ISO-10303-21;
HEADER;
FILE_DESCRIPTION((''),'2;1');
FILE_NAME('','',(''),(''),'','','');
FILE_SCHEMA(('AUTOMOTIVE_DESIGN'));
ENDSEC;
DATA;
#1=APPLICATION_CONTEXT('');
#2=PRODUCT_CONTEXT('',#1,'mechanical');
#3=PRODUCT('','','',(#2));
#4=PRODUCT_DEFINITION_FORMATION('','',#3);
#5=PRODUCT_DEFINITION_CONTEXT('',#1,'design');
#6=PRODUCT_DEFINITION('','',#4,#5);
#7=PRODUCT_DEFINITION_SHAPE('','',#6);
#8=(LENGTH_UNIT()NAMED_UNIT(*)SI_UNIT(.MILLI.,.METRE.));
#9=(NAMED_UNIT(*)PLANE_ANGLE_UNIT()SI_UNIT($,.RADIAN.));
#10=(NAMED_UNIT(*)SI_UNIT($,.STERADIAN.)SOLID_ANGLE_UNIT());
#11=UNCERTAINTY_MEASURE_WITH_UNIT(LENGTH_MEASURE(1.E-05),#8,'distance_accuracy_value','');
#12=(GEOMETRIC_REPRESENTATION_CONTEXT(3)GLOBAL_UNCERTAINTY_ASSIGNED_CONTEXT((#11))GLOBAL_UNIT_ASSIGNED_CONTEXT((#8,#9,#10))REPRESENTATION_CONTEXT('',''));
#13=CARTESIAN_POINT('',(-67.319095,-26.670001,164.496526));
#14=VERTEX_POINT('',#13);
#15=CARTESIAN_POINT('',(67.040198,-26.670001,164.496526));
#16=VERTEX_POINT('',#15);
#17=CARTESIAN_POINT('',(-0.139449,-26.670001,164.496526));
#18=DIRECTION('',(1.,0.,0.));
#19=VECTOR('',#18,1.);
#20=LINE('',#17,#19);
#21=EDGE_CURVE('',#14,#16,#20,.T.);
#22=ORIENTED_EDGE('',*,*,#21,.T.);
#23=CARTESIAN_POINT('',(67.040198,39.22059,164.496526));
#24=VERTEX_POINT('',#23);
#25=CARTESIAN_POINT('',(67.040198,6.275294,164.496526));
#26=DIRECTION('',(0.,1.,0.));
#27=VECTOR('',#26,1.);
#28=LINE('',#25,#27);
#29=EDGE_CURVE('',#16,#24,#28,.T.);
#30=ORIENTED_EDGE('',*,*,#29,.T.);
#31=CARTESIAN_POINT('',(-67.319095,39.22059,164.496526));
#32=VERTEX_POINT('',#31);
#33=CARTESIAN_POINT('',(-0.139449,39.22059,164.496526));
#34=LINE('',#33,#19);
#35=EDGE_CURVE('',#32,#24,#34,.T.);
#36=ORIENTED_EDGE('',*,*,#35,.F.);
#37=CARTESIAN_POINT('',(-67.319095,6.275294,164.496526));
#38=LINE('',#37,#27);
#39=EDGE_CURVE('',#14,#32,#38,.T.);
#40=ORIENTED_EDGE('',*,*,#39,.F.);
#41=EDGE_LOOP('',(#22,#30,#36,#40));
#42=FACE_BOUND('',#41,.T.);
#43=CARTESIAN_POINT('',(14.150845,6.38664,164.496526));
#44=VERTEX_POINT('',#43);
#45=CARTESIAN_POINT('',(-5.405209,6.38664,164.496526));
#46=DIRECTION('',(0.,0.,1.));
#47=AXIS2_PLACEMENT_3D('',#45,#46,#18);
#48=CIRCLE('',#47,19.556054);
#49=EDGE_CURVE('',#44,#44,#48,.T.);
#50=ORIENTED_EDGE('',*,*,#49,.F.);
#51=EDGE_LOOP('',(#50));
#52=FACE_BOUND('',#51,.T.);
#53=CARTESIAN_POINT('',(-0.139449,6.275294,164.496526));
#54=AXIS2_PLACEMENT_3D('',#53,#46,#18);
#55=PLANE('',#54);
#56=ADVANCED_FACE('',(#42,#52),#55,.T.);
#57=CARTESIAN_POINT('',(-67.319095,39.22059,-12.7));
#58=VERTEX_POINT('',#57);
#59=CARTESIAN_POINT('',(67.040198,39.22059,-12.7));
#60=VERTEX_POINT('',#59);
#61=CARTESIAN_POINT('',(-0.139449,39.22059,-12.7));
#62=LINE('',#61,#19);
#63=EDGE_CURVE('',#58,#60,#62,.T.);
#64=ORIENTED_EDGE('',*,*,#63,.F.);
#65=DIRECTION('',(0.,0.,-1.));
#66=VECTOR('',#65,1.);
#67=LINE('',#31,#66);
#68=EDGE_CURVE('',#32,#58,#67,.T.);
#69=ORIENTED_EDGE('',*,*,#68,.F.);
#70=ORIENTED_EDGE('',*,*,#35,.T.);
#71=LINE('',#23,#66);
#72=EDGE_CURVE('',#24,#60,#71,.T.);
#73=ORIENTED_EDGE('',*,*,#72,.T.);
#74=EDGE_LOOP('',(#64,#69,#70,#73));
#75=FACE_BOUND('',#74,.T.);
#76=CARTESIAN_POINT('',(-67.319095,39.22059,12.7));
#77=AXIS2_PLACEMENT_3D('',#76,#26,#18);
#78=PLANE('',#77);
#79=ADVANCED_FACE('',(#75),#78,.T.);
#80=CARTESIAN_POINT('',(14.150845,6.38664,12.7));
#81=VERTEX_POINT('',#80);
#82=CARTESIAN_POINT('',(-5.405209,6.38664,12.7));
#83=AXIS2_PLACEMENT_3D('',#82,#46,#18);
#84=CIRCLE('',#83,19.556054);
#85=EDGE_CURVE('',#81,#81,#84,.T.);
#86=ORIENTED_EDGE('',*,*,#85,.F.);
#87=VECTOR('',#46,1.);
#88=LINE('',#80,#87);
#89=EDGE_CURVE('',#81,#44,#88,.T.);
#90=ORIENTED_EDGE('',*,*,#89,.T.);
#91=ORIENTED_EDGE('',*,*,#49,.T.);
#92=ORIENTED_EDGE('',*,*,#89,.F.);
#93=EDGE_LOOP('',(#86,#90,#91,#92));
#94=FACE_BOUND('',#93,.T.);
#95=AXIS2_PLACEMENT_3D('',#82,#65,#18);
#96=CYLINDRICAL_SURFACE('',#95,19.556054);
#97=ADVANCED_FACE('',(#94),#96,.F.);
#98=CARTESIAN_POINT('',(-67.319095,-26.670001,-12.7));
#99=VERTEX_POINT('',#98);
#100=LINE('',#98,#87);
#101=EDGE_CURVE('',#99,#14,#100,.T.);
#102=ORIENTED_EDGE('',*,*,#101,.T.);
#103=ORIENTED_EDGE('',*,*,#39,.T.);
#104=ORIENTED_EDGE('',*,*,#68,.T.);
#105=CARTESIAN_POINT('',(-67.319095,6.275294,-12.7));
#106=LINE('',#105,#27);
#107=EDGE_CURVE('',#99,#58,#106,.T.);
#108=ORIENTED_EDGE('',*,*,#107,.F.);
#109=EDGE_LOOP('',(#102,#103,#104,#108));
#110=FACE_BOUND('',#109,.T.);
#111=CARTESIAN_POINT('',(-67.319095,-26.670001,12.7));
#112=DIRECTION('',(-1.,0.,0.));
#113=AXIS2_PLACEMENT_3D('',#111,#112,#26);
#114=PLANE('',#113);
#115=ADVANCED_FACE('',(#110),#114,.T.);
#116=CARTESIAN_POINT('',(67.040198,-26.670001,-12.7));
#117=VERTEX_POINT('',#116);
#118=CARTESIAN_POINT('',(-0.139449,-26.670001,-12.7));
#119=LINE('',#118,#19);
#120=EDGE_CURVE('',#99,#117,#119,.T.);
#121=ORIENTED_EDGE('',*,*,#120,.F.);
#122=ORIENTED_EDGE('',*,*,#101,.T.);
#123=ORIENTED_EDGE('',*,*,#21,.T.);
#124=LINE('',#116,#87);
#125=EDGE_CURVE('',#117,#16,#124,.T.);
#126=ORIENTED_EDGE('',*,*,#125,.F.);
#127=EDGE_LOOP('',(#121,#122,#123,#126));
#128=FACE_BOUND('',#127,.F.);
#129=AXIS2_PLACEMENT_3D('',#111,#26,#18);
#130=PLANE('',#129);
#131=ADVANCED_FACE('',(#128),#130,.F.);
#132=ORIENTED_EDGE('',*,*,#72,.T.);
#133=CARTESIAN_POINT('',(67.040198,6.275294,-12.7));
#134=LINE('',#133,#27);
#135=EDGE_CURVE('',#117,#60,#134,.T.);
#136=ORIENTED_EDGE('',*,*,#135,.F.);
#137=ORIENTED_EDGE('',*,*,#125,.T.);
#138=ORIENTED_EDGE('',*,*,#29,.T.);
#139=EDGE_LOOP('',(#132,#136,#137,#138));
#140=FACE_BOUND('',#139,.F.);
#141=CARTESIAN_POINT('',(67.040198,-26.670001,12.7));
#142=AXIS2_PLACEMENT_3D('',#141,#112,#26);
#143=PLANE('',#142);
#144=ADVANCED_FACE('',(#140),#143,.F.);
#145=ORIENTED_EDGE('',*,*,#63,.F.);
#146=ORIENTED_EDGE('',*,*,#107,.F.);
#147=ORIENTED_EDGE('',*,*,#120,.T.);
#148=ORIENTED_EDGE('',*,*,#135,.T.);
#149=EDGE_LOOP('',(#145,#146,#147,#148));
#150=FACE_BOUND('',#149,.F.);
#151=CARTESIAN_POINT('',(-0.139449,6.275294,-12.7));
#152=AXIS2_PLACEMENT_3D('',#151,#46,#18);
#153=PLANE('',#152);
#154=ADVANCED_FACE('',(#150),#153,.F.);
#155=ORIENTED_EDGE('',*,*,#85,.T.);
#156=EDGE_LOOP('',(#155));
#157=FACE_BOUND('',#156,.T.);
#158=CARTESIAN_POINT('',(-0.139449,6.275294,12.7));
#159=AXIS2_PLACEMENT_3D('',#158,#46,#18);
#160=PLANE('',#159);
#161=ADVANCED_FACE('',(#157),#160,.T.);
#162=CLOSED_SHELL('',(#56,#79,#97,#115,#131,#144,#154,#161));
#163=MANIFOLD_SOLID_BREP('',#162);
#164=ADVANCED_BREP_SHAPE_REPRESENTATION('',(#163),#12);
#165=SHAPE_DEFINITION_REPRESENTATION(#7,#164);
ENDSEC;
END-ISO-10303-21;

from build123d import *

# Parameters (mm, degrees)
F0_W     = 134.359292686
F0_H     = 65.8905915916
F1_DEPTH = 12.7
F2_W     = 134.359292686
F2_H     = 65.8905915916
F2_R     = 19.5560536298
F3_DEPTH = 151.7965264


# Not quite as in the source:
# - an extrude ends at something that could not be found from the text; its depth is read off the source's solid


with BuildPart() as f1:
    # F0 (on Top) → F1 (new body, symmetric)
    with BuildSketch(Plane.XY):
        with Locations((-0.1394487917, 6.2752943486)):
            Rectangle(F0_W, F0_H)
    extrude(amount=F1_DEPTH, both=True)

    # F2 (on face) → F3 (join, through all)
    with BuildSketch(Plane.XY.offset(12.7)):
        with Locations((-0.1394487917, 6.2752943486)):
            Rectangle(F2_W, F2_H)
        with Locations((-5.4052090272, 6.3866404817)):
            Circle(F2_R, mode=Mode.SUBTRACT)
    extrude(amount=F3_DEPTH)


solid = f1.part
